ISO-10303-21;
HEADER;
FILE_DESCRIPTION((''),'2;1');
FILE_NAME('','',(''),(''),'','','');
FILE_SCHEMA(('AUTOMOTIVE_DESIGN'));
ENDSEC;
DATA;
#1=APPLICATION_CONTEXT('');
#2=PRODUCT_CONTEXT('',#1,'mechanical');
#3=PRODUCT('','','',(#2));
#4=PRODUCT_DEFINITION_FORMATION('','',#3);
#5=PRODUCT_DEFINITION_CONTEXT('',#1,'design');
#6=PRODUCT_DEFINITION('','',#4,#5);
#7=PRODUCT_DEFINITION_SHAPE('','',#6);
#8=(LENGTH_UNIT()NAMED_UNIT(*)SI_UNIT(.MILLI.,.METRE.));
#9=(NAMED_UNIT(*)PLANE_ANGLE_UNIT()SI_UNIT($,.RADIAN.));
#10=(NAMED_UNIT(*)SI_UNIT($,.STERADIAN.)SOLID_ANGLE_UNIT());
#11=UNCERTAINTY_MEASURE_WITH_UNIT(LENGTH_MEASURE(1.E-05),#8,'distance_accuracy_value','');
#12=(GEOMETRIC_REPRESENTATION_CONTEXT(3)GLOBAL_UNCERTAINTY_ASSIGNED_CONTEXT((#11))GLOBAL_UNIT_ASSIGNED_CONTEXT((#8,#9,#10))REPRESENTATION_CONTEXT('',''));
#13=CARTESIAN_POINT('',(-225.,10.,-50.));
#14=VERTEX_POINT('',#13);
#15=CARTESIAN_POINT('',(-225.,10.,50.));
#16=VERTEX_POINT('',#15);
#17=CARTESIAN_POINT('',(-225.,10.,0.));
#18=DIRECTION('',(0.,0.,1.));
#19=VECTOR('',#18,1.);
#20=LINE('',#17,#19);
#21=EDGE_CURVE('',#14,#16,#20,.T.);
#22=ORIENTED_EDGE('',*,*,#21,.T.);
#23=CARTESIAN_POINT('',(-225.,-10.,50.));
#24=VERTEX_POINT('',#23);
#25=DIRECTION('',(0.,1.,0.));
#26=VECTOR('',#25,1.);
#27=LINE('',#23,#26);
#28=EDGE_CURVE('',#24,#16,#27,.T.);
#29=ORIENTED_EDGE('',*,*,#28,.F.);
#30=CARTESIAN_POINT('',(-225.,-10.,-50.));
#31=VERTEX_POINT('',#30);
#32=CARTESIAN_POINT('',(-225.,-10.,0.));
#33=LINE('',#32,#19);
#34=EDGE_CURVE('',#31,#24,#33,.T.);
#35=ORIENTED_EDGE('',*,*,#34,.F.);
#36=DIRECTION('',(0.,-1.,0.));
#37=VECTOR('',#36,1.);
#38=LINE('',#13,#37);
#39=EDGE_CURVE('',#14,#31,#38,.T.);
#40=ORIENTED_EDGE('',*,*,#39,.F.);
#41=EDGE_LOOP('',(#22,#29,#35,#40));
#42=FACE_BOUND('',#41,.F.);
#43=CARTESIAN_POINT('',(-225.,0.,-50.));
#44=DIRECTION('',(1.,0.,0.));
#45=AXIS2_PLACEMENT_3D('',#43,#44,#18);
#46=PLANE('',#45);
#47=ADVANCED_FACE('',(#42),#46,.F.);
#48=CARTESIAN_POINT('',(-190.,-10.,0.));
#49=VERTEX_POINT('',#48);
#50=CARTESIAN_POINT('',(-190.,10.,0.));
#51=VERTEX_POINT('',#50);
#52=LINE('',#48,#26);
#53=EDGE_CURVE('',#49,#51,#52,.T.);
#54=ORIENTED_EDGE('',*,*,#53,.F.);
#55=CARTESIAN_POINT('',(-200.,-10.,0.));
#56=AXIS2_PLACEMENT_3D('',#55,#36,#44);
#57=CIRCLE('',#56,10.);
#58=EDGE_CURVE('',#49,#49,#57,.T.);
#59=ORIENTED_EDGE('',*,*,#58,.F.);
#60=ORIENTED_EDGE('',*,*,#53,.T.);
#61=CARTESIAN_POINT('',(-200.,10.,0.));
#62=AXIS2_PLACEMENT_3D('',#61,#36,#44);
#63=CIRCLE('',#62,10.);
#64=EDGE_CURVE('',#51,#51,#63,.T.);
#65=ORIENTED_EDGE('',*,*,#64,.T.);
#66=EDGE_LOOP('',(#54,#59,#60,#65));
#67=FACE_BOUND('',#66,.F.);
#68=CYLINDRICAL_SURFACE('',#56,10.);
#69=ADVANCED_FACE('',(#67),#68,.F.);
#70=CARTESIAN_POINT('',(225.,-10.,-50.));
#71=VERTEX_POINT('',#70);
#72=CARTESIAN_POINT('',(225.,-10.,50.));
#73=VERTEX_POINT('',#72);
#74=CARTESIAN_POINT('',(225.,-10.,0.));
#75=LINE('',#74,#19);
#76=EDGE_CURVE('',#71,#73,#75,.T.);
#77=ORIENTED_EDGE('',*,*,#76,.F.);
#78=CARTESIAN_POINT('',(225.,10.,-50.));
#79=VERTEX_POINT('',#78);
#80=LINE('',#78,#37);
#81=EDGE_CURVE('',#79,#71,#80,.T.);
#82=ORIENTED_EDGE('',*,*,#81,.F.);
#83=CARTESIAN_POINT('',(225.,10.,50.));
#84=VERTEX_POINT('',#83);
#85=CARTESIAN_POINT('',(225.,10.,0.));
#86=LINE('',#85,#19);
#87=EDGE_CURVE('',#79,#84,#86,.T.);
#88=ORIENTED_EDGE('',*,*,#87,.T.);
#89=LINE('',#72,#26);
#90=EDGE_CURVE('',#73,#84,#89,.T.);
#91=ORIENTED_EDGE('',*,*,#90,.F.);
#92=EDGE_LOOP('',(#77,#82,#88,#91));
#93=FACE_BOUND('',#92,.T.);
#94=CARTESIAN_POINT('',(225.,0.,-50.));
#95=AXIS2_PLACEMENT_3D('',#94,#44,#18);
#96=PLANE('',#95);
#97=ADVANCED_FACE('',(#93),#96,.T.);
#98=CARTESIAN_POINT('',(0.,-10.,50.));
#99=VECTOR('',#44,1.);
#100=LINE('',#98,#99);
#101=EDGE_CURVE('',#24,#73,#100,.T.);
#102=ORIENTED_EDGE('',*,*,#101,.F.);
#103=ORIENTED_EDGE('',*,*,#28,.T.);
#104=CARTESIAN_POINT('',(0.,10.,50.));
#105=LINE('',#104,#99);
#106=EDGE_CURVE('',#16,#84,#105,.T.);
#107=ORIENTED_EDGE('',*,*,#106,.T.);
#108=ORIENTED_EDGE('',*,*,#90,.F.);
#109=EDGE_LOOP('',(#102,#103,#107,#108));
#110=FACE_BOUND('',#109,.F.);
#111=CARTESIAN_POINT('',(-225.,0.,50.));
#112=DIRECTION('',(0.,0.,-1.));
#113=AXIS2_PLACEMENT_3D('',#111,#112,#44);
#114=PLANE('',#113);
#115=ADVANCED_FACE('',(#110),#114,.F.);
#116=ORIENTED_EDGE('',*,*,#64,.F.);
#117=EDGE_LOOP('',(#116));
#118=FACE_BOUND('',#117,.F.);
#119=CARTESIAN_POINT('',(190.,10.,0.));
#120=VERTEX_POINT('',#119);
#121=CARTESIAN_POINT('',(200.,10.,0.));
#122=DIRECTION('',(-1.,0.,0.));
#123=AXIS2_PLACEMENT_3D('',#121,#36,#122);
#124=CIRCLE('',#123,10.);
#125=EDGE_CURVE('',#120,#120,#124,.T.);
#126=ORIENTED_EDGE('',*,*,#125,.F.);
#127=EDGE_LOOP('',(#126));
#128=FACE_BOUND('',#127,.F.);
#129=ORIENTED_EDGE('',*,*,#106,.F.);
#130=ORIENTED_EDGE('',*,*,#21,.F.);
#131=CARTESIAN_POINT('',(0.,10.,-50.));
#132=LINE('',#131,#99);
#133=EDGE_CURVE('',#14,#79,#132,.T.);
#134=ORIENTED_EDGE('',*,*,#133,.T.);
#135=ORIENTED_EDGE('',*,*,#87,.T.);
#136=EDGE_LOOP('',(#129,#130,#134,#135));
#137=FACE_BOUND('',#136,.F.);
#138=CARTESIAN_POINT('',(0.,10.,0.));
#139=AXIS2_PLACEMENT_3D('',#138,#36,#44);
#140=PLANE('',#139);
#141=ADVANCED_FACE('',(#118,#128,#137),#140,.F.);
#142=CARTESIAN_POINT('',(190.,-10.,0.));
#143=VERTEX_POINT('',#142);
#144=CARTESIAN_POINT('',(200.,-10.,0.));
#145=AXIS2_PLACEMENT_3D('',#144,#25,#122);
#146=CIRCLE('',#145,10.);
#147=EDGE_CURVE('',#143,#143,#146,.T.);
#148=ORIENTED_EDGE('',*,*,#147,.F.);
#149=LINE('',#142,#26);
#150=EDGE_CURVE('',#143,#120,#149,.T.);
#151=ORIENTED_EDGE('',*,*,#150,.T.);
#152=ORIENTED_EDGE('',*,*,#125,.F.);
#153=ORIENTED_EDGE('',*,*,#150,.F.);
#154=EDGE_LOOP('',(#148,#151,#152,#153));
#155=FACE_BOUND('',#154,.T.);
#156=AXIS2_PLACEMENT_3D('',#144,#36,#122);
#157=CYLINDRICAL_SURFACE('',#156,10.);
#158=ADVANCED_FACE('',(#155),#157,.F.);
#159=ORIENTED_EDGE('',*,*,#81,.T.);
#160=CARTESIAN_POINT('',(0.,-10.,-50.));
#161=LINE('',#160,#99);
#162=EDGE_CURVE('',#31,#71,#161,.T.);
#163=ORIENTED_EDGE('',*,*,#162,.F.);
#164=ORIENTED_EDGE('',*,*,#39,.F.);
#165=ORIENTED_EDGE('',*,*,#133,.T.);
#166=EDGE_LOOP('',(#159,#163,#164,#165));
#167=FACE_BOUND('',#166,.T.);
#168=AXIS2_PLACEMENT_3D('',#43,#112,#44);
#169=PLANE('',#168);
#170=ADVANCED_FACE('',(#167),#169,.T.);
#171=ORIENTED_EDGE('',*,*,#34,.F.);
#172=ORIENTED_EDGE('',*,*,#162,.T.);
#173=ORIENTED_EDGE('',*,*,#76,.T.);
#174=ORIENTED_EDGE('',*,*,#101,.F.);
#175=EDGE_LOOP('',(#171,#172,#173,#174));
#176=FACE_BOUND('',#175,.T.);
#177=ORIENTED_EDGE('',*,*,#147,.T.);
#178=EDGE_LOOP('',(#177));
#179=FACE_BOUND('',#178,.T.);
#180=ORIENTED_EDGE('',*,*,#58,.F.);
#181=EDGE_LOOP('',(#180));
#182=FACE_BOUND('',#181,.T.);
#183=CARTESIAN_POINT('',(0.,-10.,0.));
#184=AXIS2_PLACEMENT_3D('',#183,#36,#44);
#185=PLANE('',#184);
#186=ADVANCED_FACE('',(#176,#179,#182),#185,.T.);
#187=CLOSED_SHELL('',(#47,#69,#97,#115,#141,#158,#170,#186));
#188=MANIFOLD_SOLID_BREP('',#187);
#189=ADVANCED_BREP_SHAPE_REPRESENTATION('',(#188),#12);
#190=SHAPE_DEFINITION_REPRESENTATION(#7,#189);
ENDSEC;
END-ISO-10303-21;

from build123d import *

# Parameters (mm, degrees)
F0_W     = 450
F0_H     = 100
F1_DEPTH = 10
F2_R     = 10
F3_DEPTH = 20.001


# Not quite as in the source:
# - a pattern or mirror of a feature is missing from the dataset's text; its kind, count and spacing are read off the source's solid


with BuildPart() as f1:
    # F0 (on Front) → F1 (new body, symmetric)
    with BuildSketch(Plane.XZ):
        Rectangle(F0_W, F0_H)
    extrude(amount=F1_DEPTH, both=True)

    # F2 (on face) → F3 (cut, through all)
    with BuildSketch(Plane.XZ.offset(10)):
        with Locations((-200, 0)):
            Circle(F2_R)
    f3 = extrude(amount=-F3_DEPTH, mode=Mode.SUBTRACT)

    # F3_copies: F3 across plane
    add(f3.mirror(Plane(origin=(0, 0, 0), x_dir=(0, 0, 1), z_dir=(1, 0, 0))), mode=Mode.SUBTRACT)


solid = f1.part
